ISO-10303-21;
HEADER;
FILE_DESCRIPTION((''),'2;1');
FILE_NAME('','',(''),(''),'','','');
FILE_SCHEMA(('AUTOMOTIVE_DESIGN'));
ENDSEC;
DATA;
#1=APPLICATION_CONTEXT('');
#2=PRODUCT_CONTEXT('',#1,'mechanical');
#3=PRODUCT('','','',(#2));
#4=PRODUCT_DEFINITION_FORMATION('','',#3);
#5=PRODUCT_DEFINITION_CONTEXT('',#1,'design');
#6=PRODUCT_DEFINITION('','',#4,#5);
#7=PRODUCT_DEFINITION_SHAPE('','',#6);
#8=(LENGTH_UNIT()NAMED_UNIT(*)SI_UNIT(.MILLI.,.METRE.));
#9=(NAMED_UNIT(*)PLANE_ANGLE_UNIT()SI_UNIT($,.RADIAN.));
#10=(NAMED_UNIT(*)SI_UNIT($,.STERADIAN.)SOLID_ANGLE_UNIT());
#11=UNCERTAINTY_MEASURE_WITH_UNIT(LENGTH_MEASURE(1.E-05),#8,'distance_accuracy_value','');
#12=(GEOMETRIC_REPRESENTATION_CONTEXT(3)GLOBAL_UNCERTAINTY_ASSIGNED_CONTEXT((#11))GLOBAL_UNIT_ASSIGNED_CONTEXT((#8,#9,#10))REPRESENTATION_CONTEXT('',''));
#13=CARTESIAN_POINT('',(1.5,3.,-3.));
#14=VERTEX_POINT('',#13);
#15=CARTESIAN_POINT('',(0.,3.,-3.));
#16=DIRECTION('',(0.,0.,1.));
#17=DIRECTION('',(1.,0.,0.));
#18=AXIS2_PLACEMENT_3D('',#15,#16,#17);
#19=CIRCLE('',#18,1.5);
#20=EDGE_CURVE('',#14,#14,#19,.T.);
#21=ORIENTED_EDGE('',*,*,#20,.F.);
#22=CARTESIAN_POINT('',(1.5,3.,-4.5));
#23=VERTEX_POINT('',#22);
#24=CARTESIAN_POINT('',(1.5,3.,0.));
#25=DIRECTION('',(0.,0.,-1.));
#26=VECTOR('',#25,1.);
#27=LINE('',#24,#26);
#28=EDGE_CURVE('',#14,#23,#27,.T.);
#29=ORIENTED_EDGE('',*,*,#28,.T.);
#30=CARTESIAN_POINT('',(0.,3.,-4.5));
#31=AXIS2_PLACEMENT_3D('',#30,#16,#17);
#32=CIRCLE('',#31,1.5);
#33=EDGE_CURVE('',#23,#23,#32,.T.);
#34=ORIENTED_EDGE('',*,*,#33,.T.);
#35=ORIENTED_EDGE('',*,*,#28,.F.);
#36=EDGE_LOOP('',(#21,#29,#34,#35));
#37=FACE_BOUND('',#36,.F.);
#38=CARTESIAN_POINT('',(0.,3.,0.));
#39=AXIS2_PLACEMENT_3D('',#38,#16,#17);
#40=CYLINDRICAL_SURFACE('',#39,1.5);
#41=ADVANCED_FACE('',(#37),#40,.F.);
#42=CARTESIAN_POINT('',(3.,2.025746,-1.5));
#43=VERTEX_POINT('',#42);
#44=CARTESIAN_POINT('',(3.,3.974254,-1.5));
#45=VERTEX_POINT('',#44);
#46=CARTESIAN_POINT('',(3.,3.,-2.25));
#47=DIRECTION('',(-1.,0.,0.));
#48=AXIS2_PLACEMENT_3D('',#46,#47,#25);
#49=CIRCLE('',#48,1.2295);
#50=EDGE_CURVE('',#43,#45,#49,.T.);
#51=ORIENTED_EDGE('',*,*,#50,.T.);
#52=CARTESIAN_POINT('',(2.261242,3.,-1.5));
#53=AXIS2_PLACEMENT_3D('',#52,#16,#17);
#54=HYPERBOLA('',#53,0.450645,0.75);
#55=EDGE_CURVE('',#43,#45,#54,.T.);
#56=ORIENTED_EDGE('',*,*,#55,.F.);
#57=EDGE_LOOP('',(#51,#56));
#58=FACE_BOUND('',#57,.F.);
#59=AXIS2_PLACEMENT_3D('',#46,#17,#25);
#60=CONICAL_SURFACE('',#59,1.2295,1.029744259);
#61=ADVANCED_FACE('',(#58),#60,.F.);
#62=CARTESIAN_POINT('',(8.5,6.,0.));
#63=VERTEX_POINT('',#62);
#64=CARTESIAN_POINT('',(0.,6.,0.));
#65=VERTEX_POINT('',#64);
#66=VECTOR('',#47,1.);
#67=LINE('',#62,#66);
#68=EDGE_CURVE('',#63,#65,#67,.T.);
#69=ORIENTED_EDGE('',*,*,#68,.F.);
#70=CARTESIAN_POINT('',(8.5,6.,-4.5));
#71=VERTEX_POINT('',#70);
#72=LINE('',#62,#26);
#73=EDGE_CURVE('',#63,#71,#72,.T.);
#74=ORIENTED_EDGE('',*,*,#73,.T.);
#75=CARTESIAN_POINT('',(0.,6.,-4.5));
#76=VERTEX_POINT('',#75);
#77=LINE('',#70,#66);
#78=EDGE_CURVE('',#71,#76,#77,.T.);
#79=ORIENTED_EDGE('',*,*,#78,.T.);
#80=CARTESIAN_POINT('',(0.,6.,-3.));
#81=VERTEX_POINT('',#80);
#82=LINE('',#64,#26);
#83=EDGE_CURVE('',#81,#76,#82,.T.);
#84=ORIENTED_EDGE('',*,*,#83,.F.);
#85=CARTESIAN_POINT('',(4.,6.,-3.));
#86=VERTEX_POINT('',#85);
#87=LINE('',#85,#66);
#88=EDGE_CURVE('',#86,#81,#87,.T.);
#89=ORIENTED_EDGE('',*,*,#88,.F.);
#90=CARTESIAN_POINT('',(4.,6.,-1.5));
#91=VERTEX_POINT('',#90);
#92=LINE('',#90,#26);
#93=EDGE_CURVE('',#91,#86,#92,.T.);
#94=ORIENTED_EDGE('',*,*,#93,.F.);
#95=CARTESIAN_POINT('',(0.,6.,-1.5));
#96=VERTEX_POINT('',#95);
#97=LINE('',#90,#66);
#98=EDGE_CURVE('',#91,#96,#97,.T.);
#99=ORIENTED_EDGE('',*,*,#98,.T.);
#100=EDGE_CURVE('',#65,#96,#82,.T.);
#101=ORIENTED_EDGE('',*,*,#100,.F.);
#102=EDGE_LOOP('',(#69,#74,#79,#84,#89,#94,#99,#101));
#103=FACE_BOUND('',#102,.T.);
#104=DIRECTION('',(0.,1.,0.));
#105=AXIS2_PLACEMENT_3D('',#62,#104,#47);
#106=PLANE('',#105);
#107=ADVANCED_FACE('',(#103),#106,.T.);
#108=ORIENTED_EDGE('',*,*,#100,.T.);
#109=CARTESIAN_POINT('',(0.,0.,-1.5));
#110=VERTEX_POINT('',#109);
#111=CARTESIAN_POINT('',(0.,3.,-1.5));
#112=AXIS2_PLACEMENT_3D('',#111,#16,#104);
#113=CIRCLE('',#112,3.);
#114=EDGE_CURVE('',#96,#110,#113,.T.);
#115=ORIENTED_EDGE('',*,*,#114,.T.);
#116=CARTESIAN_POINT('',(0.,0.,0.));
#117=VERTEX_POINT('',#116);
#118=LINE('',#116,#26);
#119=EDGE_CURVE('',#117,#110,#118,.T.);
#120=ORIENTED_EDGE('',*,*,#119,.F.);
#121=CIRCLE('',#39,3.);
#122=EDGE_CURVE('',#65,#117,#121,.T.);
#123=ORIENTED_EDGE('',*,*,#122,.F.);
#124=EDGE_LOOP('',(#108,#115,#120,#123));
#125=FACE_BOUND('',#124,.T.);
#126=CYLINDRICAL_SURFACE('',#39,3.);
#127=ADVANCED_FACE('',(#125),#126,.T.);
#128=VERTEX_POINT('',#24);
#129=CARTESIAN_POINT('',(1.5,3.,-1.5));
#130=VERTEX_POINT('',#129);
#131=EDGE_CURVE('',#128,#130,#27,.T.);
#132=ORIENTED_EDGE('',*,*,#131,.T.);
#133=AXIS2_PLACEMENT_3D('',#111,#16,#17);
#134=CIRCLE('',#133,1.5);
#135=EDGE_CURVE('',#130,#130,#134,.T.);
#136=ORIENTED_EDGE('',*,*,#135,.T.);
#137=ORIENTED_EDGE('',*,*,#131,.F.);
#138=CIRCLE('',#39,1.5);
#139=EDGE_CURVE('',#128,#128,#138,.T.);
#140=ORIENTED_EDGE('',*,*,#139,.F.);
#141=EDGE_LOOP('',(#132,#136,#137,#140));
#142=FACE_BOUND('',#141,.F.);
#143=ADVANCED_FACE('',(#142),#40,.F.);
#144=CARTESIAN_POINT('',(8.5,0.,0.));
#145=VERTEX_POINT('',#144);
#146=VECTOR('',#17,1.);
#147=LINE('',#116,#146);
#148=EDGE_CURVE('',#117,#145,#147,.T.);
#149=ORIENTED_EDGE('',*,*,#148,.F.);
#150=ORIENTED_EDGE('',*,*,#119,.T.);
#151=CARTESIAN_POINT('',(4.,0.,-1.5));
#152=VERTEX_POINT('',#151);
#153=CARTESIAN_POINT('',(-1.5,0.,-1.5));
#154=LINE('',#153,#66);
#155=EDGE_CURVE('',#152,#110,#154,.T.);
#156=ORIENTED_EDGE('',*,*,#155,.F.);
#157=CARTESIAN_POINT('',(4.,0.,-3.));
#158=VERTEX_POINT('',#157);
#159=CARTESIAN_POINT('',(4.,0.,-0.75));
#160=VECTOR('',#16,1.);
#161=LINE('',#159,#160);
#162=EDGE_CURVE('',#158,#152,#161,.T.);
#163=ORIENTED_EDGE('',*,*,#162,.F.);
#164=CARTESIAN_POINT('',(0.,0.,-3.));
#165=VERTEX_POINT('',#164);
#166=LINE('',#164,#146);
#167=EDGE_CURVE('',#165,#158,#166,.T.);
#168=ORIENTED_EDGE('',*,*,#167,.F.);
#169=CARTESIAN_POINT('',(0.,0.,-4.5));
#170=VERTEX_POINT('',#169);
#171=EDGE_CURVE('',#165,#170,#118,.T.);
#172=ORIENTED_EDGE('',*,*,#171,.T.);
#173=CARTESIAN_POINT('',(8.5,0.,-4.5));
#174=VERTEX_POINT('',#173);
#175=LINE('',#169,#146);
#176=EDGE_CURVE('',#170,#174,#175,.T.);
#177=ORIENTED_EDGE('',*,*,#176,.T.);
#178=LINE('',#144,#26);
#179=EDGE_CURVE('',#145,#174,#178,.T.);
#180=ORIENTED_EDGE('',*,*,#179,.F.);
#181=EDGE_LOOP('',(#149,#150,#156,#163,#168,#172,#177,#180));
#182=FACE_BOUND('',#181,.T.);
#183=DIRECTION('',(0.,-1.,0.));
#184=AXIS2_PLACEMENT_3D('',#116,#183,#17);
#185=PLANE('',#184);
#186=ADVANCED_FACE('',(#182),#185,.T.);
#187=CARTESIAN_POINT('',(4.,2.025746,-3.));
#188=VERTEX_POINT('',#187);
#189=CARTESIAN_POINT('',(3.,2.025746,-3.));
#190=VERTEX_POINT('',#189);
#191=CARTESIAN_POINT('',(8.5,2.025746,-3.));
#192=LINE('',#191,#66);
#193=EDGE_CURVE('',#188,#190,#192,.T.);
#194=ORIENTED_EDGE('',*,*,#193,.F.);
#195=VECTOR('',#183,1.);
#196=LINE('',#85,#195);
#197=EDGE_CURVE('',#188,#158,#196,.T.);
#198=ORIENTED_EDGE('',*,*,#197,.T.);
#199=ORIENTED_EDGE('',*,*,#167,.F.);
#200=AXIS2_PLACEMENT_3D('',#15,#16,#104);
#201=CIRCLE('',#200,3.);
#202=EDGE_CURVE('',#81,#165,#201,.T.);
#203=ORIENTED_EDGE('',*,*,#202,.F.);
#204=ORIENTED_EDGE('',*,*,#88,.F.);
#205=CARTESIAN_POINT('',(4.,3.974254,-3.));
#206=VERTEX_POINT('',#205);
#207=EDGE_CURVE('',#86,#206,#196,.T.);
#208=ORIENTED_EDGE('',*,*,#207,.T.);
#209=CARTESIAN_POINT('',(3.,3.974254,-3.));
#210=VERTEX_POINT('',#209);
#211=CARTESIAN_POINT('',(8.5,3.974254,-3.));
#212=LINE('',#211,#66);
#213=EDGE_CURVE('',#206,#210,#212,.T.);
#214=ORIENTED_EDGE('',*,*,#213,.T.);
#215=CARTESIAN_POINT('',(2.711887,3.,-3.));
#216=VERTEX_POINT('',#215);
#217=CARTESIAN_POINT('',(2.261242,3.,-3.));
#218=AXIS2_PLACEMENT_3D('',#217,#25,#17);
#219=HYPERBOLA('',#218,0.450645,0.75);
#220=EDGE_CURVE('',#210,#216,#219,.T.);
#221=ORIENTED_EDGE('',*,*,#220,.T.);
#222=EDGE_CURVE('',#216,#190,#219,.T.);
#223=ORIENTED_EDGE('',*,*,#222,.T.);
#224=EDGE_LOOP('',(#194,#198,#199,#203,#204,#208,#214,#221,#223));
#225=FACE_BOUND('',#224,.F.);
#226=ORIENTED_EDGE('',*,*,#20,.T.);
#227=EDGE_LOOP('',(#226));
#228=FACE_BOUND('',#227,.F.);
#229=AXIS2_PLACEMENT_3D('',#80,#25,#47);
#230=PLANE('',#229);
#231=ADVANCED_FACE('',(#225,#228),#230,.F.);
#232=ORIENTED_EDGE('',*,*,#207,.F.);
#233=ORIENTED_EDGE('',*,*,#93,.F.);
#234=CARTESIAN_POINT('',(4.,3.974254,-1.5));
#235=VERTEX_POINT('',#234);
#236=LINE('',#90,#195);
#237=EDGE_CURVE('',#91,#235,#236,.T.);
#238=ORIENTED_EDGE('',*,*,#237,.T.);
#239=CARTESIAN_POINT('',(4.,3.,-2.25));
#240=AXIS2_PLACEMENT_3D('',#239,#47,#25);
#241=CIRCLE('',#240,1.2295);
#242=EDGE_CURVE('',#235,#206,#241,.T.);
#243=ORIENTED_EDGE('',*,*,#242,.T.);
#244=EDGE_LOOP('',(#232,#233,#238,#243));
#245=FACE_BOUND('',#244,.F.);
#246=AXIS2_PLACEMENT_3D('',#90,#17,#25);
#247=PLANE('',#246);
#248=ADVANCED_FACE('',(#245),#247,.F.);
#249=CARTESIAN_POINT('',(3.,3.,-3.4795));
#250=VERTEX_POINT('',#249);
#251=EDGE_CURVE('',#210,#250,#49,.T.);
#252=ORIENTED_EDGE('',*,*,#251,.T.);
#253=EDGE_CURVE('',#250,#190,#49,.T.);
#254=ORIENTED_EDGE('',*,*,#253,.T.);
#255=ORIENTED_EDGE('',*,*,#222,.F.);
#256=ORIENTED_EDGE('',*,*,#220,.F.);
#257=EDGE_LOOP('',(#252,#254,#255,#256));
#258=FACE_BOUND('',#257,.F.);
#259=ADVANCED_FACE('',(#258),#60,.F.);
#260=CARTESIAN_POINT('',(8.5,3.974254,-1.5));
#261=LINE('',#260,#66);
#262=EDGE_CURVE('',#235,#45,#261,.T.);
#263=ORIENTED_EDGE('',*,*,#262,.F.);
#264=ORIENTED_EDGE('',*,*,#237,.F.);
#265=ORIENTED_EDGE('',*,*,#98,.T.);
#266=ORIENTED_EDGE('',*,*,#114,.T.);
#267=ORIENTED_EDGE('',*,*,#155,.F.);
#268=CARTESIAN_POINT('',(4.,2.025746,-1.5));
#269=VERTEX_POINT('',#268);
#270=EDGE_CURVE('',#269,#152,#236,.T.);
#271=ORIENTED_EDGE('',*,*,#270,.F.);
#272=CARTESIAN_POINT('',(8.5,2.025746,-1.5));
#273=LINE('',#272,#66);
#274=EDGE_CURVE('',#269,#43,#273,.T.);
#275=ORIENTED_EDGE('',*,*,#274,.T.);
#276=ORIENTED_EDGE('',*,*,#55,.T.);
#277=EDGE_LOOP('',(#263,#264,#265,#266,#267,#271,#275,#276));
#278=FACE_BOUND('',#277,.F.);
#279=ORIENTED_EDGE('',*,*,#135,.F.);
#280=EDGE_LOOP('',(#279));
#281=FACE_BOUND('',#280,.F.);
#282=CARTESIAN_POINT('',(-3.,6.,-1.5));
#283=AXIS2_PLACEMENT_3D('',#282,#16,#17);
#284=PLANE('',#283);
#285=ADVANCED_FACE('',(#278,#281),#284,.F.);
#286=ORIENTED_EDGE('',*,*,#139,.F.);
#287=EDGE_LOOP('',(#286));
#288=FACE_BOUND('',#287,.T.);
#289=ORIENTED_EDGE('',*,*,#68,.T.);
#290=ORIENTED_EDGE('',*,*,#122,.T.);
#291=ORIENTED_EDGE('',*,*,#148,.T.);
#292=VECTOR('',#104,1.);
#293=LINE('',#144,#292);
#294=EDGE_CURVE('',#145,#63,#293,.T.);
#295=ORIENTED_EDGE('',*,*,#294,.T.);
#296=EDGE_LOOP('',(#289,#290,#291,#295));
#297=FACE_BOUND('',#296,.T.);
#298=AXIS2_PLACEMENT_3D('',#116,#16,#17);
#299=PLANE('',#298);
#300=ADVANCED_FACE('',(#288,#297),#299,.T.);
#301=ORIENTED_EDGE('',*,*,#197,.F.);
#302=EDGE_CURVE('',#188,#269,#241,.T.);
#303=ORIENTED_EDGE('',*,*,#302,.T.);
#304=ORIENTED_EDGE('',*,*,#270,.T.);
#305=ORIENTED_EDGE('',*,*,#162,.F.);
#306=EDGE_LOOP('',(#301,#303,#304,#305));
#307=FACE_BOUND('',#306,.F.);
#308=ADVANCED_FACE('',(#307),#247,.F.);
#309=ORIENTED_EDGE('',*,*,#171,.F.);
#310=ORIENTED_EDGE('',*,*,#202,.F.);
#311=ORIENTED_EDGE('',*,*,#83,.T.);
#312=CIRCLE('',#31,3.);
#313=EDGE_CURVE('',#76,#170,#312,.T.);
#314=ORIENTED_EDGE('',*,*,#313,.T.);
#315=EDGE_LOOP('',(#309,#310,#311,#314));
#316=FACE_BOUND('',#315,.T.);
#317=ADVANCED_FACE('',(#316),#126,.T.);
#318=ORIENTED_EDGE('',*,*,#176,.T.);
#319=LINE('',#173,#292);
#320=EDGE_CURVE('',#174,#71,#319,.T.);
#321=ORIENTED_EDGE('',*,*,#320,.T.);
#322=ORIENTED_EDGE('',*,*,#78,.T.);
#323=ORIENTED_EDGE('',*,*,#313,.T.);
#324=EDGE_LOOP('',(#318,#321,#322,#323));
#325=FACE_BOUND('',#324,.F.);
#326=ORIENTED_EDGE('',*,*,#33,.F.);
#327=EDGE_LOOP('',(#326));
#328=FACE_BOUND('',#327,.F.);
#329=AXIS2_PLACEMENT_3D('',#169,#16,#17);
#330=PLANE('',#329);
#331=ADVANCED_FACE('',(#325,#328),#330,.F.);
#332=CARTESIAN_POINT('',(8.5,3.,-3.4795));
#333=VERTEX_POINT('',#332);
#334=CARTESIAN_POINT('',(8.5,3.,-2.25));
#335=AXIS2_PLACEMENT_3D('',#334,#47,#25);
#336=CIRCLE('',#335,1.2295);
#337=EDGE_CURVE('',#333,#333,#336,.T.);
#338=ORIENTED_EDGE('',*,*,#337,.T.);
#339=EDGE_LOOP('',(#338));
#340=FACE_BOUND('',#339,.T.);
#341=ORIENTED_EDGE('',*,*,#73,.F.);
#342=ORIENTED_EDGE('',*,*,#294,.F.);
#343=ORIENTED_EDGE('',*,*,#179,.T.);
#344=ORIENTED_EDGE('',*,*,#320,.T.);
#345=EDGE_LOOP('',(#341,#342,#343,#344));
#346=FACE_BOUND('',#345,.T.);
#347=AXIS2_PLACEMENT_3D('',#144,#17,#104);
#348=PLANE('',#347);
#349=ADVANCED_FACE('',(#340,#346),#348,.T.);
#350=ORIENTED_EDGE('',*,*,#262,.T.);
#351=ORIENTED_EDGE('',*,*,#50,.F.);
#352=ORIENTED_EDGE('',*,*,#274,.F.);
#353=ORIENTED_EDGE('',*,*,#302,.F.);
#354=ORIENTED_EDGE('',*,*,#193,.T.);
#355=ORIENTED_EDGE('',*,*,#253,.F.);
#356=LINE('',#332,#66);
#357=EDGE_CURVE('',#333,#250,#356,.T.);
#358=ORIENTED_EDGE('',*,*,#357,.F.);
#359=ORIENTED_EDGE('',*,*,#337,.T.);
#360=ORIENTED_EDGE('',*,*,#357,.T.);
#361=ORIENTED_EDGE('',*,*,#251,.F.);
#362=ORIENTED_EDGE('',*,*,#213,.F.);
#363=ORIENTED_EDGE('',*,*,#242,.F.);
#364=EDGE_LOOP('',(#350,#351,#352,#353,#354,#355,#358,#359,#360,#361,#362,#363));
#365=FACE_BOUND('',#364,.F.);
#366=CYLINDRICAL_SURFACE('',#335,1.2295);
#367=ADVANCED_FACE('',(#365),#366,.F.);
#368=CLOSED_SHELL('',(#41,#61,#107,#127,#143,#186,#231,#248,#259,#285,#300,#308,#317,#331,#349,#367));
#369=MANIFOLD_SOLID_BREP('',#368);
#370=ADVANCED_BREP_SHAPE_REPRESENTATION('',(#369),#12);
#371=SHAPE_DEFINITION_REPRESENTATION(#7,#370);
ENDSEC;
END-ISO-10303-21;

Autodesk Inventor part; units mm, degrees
ref_plane "YZ Plane" through (0, 0, 0) normal (1, 0, 0) x (0, 1, 0)
ref_plane "XZ Plane" through (0, 0, 0) normal (0, 1, 0) x (-1, 0, 0)
ref_plane "XY Plane" through (0, 0, 0) normal (0, 0, 1) x (1, 0, 0)
sketch "Sketch1" plane through (0, 0, 0) normal (0, 0, 1) x (1, 0, 0)
  line L0 (0, 0) -> (8.5, 0)
  line L1 (8.5, 0) -> (8.5, 6)
  line L2 (8.5, 6) -> (0, 6)
  line L3 (0, 6) -> (0, 0) construction
  circle A0 centre (0, 3) radius 3
  circle A1 centre (0, 3) radius 1.5
  dimension "d0" = 8.5
  dimension "d1" = 6
  dimension "d2" = 3
extrude "Extrusion1" add sketch "Sketch1" against normal blind 4.5
sketch "Sketch2" plane through (0, 6, 0) normal (0, 1, 0) x (1, 0, 0)
  line L0 (8.5, 0) -> (8.5, 4.5) projected
  line L1 (0, 0) -> (0, 0) projected
  line L2 (0, 0) -> (0, 4.5) projected
  line L3 (0, 4.5) -> (0, 4.5) projected
  line L4 (0, 0) -> (0, 4.5) projected
  line L5 (-3, 0) -> (-3, 4.5) projected
  line L6 (-3, 0) -> (0, 0) projected
  line L7 (0, 4.5) -> (-3, 4.5) projected
  line L8 (-3, 1.5) -> (4, 1.5)
  line L9 (4, 1.5) -> (4, 3)
  line L10 (4, 3) -> (-3, 3)
  line L11 (-3, 3) -> (-3, 1.5)
  point P0 (4, 2.25)
  point P1 (8.5, 2.25)
  dimension "d7" = 1.5
  dimension "d8" = 7
extrude "Extrusion2" cut sketch "Sketch2" against normal through all contours L8 L5 L10 L2 | L2 L10 L9 L8
sketch "Sketch3" plane through (8.5, 0, 0) normal (1, 0, 0) x (0, 0, -1)
  line L0 (4.5, 6) -> (4.5, 0) projected
  line L1 (0, 6) -> (4.5, 6) projected
  point P0 (2.25, 3)
  dimension "d11" = 3
  dimension "d12" = 2.25
hole "Hole1" at (8.5, 3, -2.25) direction (-1, 0, 0) diameter 2.459 depth 5.5 tip angle 118 thread size "M3x0.5" class "6H" standard "ANSI Metric M Profile"
properties part number "30 - Eccentric Rod 2" material "Steel AISI 1020 107 HR"
